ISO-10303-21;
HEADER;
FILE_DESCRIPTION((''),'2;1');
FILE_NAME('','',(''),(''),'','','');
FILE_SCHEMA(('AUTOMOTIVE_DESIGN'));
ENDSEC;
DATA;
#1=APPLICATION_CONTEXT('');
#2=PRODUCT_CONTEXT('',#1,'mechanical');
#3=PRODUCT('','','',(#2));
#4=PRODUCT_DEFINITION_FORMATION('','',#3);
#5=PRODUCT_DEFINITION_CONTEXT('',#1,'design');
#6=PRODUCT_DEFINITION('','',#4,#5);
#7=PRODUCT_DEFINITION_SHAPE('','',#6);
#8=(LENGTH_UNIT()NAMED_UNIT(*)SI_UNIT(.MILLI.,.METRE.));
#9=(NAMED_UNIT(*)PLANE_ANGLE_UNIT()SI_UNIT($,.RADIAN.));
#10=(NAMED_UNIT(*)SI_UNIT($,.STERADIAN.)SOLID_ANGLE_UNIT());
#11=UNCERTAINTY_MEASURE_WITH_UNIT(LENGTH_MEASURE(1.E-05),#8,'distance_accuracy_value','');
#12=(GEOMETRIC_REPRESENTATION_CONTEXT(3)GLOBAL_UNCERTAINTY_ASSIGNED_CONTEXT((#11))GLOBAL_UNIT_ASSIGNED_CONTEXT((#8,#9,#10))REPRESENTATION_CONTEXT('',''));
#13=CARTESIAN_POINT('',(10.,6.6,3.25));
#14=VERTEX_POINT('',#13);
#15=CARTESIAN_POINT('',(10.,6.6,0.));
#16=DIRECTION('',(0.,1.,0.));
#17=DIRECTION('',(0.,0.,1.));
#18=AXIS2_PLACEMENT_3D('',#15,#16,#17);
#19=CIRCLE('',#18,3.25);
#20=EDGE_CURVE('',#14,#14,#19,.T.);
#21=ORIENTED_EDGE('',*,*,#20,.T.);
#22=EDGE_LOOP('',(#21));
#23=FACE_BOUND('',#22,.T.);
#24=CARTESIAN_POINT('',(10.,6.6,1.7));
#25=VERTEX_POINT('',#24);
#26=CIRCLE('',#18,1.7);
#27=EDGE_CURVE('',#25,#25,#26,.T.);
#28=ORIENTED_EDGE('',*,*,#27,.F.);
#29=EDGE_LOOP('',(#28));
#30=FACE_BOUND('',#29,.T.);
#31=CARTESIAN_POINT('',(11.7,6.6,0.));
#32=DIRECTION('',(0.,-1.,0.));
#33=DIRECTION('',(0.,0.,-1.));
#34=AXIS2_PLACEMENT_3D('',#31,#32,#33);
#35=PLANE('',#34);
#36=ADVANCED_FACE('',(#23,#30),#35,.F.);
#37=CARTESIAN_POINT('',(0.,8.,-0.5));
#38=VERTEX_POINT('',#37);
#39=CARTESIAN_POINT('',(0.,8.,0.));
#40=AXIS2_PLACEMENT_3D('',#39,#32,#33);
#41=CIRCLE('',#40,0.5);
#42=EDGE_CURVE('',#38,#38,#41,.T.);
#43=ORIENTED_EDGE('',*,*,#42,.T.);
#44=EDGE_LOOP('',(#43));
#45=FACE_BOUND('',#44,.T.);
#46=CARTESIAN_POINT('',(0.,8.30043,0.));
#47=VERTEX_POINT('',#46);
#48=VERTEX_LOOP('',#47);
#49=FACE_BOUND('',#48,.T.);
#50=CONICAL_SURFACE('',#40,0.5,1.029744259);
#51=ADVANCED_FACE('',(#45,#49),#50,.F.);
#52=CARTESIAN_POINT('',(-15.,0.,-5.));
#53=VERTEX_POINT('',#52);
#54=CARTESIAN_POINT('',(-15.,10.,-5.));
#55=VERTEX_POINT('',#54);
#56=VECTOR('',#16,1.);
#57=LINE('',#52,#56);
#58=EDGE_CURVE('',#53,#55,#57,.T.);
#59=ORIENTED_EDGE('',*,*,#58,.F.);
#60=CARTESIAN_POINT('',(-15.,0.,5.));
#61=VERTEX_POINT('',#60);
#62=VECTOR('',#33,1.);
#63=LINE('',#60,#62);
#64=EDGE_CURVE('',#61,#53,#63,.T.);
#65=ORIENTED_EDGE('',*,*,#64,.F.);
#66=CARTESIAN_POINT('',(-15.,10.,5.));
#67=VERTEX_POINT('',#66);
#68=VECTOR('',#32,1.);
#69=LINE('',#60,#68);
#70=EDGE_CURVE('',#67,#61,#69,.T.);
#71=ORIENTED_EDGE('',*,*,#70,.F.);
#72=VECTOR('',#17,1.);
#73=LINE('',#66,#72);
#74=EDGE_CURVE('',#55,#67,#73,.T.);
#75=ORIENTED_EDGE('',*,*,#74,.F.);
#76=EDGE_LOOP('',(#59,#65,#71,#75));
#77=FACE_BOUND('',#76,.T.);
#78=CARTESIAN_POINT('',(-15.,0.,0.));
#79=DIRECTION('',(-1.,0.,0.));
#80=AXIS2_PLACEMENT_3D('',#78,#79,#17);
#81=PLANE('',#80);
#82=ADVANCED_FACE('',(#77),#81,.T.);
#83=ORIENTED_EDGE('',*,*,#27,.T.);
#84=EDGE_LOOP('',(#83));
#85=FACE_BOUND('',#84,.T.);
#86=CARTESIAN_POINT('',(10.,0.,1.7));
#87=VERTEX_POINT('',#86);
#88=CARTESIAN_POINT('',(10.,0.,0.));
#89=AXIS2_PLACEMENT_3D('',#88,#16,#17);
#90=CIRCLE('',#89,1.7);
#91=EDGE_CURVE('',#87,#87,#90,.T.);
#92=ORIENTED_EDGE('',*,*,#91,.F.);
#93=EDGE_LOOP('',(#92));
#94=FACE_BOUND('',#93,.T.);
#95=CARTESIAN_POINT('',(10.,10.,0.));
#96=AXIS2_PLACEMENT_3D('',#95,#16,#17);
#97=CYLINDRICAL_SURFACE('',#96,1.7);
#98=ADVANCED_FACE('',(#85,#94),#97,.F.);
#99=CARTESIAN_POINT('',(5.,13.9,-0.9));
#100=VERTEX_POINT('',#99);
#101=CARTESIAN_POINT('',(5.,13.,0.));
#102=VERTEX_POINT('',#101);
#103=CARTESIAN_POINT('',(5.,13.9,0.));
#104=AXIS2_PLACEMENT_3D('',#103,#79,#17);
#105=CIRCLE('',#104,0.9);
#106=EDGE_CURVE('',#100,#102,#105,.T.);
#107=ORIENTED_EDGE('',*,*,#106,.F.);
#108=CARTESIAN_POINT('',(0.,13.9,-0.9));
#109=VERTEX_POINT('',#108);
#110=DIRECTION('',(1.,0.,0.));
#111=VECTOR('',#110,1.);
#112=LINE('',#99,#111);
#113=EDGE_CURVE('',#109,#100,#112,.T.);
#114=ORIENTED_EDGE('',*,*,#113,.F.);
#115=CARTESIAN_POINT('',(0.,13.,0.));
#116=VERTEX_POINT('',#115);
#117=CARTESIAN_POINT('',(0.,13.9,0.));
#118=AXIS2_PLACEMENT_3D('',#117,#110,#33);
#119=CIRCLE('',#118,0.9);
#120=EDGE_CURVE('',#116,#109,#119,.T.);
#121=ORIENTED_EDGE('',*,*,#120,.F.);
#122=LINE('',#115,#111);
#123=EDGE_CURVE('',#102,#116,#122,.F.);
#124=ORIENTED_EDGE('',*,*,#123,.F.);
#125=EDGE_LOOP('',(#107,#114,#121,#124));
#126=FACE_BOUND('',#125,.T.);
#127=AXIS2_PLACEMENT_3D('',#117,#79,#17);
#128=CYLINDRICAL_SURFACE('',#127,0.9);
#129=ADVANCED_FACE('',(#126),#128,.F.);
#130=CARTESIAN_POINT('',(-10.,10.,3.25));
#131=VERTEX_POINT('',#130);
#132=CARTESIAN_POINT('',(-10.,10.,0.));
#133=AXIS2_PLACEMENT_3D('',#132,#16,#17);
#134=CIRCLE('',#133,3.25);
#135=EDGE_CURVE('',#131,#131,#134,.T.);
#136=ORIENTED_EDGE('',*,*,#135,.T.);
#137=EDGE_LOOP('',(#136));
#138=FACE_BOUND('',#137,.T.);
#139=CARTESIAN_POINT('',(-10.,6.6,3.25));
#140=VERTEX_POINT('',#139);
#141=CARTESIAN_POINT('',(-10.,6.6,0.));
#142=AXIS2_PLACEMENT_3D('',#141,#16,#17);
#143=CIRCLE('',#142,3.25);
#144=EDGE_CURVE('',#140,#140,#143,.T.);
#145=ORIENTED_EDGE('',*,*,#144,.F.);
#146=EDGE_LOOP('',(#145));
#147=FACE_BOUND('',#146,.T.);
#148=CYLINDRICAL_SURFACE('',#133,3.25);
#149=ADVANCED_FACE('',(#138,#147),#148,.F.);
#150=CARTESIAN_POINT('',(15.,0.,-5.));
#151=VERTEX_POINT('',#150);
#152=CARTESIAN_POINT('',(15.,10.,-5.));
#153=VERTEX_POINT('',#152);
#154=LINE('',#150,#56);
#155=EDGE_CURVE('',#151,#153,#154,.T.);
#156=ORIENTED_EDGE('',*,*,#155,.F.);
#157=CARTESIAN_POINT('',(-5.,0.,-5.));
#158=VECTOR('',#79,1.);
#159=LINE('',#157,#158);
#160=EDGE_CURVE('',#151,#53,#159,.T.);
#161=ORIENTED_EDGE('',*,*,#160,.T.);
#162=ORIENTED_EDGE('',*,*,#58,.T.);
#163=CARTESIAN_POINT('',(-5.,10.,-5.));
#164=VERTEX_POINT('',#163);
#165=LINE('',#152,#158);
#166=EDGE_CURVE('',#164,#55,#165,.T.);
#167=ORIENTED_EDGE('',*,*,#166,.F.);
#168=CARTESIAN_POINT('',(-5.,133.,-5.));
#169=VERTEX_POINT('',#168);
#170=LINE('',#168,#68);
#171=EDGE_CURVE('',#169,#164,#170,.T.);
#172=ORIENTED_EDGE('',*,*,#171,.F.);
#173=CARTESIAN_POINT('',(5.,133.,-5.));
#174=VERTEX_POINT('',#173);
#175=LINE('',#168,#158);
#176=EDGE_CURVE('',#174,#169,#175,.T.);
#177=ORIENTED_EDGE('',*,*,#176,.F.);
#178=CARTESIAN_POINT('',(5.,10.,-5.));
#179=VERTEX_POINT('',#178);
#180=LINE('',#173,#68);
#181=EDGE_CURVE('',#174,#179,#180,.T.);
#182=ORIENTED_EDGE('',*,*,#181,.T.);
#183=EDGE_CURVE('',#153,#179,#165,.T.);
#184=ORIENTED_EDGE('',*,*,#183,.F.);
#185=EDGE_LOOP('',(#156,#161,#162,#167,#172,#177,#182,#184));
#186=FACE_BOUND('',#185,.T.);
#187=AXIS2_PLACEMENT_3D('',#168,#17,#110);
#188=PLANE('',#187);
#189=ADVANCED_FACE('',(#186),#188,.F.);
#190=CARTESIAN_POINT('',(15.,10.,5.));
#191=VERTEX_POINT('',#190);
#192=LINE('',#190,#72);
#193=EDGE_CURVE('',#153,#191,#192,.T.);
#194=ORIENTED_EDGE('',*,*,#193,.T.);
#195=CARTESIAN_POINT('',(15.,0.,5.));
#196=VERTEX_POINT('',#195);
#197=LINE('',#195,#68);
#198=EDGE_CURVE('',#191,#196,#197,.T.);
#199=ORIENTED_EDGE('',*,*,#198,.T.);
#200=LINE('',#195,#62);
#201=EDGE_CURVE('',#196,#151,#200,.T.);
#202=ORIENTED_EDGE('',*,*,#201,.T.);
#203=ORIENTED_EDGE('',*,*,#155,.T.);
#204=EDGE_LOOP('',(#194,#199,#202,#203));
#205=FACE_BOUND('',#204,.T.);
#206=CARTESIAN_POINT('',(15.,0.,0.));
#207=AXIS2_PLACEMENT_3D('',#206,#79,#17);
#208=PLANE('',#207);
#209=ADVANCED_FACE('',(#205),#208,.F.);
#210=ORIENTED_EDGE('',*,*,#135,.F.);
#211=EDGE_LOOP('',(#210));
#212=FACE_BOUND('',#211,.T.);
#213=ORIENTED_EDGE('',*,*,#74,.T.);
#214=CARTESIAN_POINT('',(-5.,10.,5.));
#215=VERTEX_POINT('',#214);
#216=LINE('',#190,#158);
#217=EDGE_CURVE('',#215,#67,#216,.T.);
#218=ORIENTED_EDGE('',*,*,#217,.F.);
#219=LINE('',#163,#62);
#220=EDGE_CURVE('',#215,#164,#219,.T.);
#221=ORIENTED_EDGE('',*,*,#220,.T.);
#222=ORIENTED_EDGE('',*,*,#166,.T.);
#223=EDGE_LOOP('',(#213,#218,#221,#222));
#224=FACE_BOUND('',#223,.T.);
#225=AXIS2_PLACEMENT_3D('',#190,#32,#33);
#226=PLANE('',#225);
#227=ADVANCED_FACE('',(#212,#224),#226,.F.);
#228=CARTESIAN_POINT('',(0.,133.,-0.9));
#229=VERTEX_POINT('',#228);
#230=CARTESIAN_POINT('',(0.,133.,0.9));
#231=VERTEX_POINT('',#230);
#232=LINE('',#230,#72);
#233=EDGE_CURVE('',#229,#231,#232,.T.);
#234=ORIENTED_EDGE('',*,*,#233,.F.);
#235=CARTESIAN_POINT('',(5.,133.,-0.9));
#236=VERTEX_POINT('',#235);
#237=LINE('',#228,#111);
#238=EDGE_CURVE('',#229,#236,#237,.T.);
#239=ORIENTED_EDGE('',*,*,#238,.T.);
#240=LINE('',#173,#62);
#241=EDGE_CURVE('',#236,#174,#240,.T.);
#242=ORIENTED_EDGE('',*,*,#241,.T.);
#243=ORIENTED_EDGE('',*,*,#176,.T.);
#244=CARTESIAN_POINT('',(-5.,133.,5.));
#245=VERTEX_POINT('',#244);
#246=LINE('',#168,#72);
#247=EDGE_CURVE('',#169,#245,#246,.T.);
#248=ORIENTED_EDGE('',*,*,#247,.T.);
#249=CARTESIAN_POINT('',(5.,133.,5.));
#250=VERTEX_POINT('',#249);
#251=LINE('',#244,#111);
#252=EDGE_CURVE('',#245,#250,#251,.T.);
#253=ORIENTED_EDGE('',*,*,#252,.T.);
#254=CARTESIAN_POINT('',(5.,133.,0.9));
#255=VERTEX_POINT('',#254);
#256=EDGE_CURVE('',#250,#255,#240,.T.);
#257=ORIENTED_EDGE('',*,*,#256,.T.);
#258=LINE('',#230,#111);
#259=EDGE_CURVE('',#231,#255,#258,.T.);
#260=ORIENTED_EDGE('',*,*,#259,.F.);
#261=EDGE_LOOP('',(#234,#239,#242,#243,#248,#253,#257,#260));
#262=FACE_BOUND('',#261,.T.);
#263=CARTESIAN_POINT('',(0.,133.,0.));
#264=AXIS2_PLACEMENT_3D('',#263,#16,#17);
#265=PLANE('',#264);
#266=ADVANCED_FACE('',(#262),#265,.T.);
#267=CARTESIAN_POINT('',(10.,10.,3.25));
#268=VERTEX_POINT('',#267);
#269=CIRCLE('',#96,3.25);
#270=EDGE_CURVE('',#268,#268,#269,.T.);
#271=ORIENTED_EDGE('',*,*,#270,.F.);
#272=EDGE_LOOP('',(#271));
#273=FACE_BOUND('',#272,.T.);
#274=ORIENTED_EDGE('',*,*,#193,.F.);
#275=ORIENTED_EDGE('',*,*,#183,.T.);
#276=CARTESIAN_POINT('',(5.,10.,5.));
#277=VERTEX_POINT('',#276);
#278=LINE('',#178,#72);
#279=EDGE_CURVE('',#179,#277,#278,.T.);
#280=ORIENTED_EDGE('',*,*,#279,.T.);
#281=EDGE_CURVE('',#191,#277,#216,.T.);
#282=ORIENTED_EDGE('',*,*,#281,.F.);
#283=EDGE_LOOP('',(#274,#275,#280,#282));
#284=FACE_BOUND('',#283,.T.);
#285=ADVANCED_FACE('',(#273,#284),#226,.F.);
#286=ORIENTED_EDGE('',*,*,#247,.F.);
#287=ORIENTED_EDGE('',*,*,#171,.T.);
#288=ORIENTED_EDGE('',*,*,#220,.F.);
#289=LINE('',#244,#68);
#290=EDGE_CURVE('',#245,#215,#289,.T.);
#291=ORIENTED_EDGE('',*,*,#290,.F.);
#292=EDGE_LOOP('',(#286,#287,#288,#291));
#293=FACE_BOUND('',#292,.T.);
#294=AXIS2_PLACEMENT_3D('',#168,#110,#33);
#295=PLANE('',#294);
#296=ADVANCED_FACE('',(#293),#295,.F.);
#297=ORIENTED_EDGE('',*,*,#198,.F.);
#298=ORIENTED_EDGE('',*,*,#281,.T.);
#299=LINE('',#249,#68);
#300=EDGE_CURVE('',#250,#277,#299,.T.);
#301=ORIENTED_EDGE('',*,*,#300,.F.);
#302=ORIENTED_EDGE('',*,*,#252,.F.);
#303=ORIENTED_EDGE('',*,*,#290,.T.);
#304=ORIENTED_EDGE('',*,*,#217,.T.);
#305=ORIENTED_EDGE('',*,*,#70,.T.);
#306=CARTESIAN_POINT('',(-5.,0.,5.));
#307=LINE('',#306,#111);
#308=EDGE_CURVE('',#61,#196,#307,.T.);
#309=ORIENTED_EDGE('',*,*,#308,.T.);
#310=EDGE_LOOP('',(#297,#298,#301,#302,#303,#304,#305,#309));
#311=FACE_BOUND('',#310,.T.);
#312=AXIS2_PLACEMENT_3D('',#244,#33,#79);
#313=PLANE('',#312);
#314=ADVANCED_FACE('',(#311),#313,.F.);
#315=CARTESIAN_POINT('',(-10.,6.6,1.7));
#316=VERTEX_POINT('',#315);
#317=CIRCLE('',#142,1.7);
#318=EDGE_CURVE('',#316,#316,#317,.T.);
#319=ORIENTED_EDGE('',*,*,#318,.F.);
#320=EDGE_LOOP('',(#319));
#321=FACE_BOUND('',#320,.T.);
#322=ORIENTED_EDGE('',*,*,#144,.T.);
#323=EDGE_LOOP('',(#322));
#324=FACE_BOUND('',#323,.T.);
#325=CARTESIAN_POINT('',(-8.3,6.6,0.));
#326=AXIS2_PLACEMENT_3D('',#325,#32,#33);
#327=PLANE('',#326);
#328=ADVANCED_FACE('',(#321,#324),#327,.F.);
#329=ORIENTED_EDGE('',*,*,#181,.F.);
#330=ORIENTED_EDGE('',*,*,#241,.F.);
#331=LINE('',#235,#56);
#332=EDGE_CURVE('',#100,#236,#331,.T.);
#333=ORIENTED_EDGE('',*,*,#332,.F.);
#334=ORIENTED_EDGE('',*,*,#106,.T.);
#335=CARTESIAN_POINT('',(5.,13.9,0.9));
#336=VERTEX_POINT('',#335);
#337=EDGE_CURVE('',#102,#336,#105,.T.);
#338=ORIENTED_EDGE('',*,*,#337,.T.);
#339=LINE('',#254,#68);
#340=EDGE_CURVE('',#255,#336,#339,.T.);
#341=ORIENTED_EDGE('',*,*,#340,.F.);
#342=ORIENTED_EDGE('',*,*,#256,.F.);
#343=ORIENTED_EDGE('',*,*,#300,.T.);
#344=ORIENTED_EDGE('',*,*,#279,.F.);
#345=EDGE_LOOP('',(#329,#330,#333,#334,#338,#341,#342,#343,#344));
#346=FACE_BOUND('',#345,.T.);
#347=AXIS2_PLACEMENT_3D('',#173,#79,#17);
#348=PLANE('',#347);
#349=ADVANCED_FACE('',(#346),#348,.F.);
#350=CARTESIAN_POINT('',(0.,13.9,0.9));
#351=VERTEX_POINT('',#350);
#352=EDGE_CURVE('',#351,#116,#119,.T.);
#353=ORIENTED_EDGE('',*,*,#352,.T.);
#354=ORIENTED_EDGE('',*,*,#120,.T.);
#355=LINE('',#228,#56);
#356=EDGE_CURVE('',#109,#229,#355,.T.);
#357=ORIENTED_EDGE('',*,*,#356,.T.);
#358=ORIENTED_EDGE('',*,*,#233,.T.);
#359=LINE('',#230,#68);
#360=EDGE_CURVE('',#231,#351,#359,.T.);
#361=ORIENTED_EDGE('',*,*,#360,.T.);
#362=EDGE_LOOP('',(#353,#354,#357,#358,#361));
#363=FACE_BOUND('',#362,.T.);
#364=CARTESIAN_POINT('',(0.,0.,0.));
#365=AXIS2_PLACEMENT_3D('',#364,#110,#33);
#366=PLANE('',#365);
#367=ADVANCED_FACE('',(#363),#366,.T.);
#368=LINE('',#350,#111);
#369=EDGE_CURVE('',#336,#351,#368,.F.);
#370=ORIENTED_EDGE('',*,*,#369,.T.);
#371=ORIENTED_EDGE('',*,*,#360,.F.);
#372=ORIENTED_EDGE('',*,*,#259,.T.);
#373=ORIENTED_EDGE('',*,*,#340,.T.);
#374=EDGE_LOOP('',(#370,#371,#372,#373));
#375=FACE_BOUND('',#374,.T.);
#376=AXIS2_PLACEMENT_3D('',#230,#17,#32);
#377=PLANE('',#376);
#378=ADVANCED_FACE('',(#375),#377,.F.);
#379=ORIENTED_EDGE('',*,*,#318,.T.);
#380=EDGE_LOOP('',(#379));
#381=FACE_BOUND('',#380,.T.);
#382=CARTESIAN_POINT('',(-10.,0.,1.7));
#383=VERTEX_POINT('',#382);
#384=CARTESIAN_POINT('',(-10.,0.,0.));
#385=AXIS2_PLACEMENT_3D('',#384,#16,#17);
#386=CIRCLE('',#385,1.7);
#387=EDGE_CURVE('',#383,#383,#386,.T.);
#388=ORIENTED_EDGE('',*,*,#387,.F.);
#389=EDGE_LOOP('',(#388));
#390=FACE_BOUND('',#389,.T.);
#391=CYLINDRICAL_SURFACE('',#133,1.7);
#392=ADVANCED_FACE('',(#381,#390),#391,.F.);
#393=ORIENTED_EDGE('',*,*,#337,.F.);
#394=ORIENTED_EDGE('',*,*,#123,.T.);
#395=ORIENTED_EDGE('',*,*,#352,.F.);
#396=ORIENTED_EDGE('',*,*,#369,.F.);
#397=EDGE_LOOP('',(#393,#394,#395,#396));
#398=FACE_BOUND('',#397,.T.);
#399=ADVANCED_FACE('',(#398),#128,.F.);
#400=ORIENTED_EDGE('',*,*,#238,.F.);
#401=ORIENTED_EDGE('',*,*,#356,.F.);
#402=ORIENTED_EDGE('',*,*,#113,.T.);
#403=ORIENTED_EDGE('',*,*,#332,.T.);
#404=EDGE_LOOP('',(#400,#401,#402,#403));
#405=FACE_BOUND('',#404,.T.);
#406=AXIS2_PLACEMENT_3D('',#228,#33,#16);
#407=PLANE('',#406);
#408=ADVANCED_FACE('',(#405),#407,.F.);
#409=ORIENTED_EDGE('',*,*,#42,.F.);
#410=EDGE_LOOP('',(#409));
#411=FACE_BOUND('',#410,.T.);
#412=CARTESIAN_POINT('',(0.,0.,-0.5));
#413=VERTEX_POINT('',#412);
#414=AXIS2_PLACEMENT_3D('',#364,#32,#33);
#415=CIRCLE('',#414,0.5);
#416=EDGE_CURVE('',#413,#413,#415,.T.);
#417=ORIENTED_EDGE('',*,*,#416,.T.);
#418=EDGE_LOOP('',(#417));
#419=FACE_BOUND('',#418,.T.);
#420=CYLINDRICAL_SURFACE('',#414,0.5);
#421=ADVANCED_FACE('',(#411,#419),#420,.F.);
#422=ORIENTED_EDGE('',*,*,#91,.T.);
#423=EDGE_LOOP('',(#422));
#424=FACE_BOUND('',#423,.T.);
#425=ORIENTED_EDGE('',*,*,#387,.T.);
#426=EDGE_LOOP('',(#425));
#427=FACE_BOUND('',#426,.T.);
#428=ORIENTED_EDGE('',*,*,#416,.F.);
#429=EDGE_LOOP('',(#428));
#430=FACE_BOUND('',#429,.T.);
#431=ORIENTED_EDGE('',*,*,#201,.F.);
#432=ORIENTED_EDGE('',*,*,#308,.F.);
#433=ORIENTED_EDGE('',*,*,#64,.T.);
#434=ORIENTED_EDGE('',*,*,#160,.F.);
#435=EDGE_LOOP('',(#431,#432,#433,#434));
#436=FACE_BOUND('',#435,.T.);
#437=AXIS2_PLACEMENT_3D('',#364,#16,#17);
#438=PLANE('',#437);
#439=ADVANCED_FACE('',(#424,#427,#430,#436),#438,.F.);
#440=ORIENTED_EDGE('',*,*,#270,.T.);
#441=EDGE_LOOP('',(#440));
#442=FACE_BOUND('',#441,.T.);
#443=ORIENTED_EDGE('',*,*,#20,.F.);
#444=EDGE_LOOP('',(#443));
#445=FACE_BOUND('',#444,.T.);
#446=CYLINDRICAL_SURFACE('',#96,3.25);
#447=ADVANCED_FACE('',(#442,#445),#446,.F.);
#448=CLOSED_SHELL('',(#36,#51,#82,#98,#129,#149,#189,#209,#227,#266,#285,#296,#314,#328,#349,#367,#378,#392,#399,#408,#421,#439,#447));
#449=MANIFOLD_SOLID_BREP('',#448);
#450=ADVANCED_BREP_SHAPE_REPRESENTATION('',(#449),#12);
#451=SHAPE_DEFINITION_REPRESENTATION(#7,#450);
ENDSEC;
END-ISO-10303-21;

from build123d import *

# Parameters (mm, degrees)
SKETCH1_W                                           = 10
SKETCH1_H                                           = 10
BOSS_EXTRUDE1_DEPTH                                 = 133
SKETCH3_W                                           = 1.8
SKETCH3_H                                           = 120
CUT_EXTRUDE1_DEPTH                                  = 5
FILLET1_R                                           = 0.9
SKETCH4_W                                           = 10
SKETCH4_H                                           = 10
BOSS_EXTRUDE3_DEPTH                                 = 15
CBORE_FOR_M3_HEX_SOCKET_HEAD_CAP_SCREW1_D           = 3.4
CBORE_FOR_M3_HEX_SOCKET_HEAD_CAP_SCREW1_CBORE_D     = 6.5
CBORE_FOR_M3_HEX_SOCKET_HEAD_CAP_SCREW1_CBORE_DEPTH = 3.4
F_1_0MM_DOWEL_HOLE1_D                               = 1
F_1_0MM_DOWEL_HOLE1_DEPTH                           = 8
F_1_0MM_DOWEL_HOLE1_TIP                             = 0.30043031


with BuildPart() as part:
    # Sketch1 → Boss-Extrude1 (new body)
    with BuildSketch(Plane(origin=(0, 0, 0), x_dir=(1, 0, 0), z_dir=(0, 1, 0))):
        Rectangle(SKETCH1_W, SKETCH1_H)
    extrude(amount=BOSS_EXTRUDE1_DEPTH)

    # Sketch3 → Cut-Extrude1 (cut)
    with BuildSketch(Plane(origin=(5, 0, 0), x_dir=(0, 0, -1), z_dir=(1, 0, 0))):
        with Locations((0, 73)):
            Rectangle(SKETCH3_W, SKETCH3_H)
    extrude(amount=-CUT_EXTRUDE1_DEPTH, mode=Mode.SUBTRACT)

    # Fillet1
    fillet1_edges = [part.edges().sort_by_distance(p)[0] for p in [
        (2.5, 13, 0.9),
        (2.5, 13, -0.9),
    ]]
    fillet(fillet1_edges, radius=FILLET1_R - 0.0001)  # a hair under: the kernel refuses the full size

    # Sketch4 → Boss-Extrude3 (add, symmetric)
    with BuildSketch(Plane(origin=(0, 0, 0), x_dir=(0, 0, -1), z_dir=(1, 0, 0))):
        with Locations((0, 5)):
            Rectangle(SKETCH4_W, SKETCH4_H)
    extrude(amount=BOSS_EXTRUDE3_DEPTH, both=True)

    # CBORE for M3 Hex Socket Head Cap Screw1 (through all)
    with Locations(Plane(origin=(10, 10, 0), x_dir=(0, 0, 1), z_dir=(0, 1, 0))):
        with Locations((0, 0)):
            cbore_for_m3_hex_socket_head_cap_screw1 = CounterBoreHole(CBORE_FOR_M3_HEX_SOCKET_HEAD_CAP_SCREW1_D / 2, CBORE_FOR_M3_HEX_SOCKET_HEAD_CAP_SCREW1_CBORE_D / 2, CBORE_FOR_M3_HEX_SOCKET_HEAD_CAP_SCREW1_CBORE_DEPTH)

    # Mirror1: CBORE for M3 Hex Socket Head Cap Screw1 across plane
    add(cbore_for_m3_hex_socket_head_cap_screw1.mirror(Plane(origin=(0, 0, 0), x_dir=(0, 0, 1), z_dir=(1, 0, 0))), mode=Mode.SUBTRACT)

    # Ø1.0mm Dowel Hole1
    with Locations(Plane(origin=(0, 0, 0), x_dir=(0, 0, -1), z_dir=(0, -1, 0))):
        with Locations((0, 0)):
            Hole(F_1_0MM_DOWEL_HOLE1_D / 2, depth=F_1_0MM_DOWEL_HOLE1_DEPTH)
            with Locations((0, 0, -(F_1_0MM_DOWEL_HOLE1_DEPTH + F_1_0MM_DOWEL_HOLE1_TIP / 2))):  # 118° drill point
                Cone(0, F_1_0MM_DOWEL_HOLE1_D / 2, F_1_0MM_DOWEL_HOLE1_TIP, mode=Mode.SUBTRACT)


solid = part.part
